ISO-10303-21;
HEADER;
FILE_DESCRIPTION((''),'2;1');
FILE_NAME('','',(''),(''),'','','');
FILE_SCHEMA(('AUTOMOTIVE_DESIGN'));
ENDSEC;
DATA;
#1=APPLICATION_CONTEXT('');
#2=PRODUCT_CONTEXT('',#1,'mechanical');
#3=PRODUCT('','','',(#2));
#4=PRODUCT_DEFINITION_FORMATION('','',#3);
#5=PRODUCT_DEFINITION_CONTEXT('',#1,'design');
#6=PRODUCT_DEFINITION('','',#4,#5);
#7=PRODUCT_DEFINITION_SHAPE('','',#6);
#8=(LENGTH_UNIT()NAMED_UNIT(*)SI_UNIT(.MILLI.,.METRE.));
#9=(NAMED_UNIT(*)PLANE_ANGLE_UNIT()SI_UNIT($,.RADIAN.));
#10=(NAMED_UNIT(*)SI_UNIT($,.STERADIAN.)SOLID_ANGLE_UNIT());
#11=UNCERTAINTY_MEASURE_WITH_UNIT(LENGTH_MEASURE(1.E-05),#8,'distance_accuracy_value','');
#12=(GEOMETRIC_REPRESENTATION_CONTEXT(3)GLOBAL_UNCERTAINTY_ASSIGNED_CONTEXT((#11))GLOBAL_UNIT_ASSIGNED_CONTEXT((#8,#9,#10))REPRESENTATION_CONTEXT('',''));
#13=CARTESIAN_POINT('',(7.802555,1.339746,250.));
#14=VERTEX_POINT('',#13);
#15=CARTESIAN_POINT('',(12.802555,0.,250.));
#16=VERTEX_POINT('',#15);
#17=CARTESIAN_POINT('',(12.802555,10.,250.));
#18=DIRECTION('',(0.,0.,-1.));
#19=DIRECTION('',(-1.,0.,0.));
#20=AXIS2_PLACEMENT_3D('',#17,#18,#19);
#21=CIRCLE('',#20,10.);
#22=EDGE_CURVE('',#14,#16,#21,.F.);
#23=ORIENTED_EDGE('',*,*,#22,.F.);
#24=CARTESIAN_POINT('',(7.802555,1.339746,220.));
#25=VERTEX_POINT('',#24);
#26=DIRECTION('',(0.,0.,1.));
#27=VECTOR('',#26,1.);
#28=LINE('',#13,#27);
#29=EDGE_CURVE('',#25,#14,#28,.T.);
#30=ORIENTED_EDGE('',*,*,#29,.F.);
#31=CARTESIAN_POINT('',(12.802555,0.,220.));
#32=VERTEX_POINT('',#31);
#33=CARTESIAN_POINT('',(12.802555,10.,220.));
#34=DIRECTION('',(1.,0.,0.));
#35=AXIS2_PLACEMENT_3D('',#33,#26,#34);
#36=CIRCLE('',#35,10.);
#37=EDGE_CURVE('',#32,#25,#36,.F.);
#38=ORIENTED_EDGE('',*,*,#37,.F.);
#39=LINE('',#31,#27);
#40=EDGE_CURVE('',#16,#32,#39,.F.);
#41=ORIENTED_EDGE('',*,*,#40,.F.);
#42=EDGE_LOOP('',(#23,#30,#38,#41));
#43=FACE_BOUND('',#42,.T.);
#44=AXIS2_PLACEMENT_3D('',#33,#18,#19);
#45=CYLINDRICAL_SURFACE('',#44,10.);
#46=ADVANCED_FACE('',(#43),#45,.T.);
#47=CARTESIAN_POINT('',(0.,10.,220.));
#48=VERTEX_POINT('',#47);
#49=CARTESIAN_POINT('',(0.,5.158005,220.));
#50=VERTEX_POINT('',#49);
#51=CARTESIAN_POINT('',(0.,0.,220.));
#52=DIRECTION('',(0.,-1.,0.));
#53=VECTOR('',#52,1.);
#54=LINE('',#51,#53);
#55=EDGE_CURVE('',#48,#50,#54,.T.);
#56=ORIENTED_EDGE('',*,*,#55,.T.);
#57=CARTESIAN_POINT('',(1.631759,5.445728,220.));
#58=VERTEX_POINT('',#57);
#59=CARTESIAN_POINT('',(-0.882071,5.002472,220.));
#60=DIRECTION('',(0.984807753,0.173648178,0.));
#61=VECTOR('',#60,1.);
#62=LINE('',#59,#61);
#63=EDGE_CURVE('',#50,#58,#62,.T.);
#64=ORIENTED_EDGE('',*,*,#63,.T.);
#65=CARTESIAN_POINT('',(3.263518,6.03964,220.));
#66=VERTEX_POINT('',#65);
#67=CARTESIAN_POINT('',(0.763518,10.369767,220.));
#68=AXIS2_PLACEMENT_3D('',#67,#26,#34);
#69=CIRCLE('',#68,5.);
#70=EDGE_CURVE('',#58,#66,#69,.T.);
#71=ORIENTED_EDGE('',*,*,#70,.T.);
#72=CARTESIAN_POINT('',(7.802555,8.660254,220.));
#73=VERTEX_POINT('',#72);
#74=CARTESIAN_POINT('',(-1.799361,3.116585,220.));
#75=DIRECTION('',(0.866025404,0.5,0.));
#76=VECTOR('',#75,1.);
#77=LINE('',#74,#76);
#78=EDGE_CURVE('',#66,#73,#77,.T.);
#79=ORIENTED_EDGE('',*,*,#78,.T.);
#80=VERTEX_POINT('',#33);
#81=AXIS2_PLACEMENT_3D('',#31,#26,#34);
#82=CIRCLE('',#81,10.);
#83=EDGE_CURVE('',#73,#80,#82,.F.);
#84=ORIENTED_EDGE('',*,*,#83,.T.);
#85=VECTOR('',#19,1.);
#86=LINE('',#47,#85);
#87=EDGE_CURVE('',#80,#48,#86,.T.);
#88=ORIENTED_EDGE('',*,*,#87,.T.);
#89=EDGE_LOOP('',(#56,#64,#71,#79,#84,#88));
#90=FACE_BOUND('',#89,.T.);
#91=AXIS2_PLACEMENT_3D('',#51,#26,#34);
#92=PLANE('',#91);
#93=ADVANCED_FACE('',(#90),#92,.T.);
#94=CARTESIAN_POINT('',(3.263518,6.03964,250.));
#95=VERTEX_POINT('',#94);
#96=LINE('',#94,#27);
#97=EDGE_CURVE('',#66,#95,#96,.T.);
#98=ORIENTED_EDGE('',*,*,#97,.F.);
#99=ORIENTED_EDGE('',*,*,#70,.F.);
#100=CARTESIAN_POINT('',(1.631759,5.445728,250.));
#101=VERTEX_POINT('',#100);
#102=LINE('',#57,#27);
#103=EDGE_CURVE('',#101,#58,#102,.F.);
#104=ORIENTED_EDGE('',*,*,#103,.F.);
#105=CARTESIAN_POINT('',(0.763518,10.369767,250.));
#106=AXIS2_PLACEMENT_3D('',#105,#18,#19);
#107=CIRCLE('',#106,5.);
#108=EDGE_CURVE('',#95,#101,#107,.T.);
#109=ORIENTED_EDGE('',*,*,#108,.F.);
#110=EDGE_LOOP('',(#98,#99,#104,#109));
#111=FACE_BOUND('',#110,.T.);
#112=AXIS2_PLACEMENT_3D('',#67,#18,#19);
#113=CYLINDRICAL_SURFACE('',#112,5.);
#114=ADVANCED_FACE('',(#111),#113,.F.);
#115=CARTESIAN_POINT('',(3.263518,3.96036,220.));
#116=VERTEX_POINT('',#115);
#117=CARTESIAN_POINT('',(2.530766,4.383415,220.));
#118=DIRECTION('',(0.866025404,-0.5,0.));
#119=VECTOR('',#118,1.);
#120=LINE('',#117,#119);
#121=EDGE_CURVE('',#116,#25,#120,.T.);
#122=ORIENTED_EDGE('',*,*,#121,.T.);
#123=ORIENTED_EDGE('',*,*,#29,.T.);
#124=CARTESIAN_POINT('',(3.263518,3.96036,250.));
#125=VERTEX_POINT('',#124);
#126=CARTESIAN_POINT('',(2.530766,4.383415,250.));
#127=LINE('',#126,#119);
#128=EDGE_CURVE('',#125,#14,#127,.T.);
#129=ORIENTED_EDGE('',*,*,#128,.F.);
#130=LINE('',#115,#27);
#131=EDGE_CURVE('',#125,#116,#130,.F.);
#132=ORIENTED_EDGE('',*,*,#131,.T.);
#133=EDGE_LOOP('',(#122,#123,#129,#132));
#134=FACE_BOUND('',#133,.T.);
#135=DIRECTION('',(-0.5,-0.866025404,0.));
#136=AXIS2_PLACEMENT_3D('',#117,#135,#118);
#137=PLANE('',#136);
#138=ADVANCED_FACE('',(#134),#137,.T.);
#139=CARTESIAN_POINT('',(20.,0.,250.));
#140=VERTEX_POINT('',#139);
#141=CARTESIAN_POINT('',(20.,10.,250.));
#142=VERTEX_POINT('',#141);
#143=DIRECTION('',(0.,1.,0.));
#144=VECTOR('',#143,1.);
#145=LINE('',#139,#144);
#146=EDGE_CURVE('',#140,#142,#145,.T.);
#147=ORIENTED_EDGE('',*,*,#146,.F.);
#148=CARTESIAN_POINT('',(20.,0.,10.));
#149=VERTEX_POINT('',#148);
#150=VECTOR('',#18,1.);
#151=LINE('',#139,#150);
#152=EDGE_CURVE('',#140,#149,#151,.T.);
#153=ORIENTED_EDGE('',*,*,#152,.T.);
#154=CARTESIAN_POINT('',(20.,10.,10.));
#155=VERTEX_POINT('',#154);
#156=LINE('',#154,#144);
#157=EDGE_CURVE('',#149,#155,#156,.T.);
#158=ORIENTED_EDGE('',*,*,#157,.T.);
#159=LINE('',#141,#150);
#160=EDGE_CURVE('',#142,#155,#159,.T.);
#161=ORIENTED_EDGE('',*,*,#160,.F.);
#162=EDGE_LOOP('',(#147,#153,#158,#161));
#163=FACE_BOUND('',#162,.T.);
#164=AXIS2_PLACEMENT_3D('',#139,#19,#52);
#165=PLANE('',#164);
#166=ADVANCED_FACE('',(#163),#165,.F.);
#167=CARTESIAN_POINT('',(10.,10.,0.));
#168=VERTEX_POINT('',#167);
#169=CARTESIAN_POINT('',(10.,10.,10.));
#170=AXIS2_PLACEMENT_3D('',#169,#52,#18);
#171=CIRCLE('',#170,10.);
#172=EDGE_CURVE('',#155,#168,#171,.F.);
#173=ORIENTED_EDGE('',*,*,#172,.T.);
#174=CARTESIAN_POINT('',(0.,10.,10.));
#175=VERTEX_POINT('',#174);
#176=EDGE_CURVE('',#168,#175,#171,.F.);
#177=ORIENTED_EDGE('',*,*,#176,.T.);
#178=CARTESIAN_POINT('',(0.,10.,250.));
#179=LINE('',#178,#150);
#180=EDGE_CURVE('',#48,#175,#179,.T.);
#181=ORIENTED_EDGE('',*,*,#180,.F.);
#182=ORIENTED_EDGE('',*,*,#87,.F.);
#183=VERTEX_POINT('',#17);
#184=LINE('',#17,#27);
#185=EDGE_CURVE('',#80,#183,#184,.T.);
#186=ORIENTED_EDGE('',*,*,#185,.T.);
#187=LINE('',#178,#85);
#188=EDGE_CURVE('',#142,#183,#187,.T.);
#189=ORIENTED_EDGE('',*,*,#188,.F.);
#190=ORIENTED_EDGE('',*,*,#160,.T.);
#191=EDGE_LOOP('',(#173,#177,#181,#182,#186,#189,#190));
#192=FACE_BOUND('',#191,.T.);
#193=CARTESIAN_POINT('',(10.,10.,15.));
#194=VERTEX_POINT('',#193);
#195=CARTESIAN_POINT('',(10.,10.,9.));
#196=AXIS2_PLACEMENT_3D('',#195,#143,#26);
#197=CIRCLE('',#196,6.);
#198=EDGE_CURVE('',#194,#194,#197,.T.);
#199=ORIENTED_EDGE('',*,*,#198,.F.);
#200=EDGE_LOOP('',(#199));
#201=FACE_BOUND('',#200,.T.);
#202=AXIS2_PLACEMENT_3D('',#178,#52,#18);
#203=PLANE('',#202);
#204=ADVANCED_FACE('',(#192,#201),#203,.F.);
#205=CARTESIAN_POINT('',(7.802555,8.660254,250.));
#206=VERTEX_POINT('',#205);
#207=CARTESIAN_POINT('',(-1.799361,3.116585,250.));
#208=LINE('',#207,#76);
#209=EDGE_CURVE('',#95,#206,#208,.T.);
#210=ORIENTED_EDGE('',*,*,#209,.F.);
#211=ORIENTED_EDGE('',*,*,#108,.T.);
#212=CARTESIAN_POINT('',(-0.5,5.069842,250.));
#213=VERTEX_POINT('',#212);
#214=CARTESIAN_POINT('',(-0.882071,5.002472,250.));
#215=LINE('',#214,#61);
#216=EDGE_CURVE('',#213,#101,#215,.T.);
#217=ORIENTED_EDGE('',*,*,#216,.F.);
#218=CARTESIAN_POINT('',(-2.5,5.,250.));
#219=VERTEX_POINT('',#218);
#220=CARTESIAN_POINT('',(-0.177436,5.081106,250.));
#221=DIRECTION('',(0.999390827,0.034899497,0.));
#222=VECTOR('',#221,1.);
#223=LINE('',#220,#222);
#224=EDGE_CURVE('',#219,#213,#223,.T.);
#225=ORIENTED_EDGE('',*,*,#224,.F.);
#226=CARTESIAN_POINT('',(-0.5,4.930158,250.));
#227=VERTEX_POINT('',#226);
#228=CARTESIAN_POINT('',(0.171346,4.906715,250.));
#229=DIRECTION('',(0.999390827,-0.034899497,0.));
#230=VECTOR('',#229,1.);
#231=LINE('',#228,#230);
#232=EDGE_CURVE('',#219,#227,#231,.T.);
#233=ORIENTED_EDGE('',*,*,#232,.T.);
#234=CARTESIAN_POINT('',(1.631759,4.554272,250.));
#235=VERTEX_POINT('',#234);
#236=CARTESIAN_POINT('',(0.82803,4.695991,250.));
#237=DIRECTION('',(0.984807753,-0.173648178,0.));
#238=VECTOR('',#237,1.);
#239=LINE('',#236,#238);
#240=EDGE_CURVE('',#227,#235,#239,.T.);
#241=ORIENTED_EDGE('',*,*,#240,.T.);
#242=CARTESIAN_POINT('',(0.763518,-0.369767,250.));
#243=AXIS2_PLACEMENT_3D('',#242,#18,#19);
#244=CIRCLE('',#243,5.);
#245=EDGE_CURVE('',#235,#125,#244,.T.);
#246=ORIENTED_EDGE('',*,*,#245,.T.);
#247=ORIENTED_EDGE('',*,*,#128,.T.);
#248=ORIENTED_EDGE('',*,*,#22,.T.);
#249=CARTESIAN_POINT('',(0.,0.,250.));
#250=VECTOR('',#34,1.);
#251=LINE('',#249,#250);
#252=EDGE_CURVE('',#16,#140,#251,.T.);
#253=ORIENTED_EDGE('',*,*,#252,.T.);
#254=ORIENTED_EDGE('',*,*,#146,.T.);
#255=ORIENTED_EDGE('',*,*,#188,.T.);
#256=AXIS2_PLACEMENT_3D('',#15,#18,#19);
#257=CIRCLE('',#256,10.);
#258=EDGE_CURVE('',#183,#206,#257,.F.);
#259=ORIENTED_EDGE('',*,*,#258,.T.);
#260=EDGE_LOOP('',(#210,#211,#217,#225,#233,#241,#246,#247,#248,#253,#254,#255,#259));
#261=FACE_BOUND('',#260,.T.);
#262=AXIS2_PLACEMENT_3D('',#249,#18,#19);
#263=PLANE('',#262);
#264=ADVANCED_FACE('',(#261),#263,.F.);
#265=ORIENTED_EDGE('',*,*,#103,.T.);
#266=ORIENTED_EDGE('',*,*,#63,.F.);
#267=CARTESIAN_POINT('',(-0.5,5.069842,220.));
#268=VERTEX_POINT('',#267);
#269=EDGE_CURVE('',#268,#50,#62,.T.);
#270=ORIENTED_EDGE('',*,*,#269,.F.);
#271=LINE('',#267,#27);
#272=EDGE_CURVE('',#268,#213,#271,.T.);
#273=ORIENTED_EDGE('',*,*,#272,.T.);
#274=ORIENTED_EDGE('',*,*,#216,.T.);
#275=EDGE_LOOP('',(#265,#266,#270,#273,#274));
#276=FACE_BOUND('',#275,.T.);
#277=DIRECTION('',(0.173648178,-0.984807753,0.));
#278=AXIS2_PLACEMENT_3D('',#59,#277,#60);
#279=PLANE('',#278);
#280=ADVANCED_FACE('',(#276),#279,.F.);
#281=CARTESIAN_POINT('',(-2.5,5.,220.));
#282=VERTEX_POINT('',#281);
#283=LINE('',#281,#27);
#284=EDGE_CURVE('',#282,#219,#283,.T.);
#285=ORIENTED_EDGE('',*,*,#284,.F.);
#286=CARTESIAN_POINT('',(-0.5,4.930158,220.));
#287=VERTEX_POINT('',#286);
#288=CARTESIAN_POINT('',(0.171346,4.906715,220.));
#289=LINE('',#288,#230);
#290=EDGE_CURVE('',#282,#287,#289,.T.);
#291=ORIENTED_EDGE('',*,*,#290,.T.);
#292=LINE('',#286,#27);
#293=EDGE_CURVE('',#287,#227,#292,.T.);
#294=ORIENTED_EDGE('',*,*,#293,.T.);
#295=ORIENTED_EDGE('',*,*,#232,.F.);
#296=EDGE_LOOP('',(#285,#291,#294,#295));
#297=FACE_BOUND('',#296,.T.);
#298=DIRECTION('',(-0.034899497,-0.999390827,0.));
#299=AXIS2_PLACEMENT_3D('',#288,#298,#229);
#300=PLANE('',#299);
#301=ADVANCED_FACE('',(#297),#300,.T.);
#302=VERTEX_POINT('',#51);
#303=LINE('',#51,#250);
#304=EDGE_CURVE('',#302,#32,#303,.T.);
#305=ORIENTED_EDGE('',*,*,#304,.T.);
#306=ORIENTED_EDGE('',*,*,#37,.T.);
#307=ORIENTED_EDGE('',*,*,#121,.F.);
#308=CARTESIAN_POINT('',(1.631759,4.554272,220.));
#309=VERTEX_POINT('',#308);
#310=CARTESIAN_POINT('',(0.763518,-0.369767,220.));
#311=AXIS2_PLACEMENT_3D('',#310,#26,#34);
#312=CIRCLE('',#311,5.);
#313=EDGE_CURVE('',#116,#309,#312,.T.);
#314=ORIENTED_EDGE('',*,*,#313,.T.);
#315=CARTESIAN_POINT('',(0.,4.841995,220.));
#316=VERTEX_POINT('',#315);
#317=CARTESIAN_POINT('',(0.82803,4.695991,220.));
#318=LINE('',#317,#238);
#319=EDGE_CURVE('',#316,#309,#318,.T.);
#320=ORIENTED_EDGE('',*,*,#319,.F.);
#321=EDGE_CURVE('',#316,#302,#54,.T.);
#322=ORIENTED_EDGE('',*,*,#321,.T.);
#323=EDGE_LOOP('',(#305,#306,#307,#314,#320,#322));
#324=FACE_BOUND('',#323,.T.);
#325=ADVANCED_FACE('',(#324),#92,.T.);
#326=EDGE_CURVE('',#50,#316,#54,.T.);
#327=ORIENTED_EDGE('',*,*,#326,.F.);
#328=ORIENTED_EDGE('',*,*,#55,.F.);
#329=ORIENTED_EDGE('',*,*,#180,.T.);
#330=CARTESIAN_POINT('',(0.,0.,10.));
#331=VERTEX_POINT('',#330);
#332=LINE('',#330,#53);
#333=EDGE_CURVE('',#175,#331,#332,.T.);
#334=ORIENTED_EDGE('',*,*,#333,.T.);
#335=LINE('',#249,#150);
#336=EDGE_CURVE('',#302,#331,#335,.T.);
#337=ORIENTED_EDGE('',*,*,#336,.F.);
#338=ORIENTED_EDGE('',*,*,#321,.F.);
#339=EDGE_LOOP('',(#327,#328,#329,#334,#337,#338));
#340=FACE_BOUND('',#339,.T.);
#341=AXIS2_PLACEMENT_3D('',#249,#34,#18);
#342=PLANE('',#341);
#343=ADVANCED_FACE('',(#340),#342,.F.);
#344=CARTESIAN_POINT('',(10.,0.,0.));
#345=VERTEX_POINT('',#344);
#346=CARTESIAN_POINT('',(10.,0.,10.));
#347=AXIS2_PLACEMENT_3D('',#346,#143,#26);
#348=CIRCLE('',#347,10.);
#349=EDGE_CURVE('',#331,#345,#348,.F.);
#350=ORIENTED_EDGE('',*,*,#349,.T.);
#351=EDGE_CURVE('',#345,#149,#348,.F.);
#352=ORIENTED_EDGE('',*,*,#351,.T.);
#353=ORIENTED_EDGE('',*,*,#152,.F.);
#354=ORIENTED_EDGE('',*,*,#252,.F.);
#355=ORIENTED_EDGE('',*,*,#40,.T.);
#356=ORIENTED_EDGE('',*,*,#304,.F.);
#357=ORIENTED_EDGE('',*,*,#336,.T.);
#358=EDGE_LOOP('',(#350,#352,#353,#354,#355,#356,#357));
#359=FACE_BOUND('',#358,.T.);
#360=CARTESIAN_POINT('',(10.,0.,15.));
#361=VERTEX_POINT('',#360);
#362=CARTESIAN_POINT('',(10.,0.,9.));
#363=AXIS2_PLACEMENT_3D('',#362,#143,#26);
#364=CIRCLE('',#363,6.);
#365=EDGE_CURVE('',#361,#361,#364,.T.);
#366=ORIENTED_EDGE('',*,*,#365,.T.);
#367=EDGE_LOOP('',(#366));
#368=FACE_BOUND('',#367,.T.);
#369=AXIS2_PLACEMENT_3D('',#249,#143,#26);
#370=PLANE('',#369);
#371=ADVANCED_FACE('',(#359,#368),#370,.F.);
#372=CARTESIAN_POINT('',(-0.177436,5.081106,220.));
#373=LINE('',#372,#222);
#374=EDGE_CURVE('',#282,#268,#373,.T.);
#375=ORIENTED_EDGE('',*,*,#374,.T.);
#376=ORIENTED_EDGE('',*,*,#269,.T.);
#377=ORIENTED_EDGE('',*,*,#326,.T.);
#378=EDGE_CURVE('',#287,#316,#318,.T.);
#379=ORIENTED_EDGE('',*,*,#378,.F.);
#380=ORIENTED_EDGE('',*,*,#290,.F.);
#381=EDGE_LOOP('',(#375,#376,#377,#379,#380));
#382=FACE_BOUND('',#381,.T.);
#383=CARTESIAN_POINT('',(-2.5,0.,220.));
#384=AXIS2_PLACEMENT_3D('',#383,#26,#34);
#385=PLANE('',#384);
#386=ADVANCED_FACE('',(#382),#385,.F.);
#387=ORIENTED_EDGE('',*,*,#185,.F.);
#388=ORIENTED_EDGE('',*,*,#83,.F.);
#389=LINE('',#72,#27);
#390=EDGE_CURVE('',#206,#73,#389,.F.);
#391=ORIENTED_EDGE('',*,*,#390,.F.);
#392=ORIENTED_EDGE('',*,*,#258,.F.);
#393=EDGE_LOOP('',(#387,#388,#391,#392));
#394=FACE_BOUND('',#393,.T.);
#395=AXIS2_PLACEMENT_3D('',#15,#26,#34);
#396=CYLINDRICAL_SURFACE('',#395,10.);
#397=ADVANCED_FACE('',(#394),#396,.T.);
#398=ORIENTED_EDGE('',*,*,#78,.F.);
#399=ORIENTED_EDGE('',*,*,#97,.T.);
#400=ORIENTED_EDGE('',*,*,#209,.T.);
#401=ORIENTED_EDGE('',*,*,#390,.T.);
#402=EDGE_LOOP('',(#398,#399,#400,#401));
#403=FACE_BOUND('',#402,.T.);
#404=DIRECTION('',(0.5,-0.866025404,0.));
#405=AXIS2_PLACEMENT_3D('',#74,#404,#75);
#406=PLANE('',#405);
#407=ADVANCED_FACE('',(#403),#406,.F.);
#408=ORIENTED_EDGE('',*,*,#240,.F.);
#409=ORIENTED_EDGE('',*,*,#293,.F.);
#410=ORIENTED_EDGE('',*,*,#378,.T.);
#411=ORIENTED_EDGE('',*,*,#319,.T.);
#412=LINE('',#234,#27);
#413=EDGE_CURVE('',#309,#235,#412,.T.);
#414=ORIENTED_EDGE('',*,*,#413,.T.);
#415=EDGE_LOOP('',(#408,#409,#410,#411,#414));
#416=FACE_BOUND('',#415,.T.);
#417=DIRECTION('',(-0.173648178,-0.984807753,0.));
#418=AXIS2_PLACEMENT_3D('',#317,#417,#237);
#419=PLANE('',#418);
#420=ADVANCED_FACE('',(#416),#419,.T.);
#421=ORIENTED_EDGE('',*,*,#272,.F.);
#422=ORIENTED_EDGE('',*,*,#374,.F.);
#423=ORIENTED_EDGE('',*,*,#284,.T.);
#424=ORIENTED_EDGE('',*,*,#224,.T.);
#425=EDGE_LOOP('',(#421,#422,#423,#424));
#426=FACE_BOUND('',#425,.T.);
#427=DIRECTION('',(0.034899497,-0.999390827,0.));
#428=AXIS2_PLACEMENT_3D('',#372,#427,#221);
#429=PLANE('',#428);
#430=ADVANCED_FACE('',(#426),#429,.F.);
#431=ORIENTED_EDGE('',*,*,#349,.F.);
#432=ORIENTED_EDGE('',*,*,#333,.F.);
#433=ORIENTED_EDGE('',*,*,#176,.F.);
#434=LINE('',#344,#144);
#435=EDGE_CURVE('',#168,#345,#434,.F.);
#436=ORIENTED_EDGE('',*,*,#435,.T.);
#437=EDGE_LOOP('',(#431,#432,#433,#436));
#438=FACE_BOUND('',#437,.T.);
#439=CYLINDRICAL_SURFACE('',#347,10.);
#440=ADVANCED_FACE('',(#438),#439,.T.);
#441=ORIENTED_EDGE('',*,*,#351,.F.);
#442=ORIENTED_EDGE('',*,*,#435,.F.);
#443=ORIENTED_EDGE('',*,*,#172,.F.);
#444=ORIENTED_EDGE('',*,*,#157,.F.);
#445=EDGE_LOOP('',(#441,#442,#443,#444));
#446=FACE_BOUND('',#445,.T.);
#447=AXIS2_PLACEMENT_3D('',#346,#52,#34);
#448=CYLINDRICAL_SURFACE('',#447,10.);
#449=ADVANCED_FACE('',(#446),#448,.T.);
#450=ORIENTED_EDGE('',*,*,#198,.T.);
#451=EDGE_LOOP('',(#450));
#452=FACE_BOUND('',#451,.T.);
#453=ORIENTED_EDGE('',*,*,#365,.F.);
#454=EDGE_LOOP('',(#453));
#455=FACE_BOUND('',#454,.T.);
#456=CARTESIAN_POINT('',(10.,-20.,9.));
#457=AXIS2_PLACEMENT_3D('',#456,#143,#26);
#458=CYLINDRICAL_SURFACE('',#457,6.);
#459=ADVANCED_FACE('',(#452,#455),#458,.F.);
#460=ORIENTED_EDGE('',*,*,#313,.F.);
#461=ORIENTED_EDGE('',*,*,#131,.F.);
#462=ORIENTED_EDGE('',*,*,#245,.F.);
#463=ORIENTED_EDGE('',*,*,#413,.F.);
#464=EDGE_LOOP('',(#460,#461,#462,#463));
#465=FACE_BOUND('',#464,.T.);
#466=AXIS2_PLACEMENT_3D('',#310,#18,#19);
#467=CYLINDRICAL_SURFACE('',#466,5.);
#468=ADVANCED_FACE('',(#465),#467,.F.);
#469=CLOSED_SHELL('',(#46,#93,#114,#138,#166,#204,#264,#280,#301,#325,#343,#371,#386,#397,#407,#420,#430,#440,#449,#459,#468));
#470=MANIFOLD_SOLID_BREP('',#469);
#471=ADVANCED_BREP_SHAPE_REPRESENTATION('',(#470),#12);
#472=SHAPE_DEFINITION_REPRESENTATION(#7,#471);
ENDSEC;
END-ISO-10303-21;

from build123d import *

# Parameters (mm, degrees)
SKETCH2_W           = 20
SKETCH2_H           = 10
BOSS_EXTRUDE1_DEPTH = 250
SKETCH3_R           = 6
CUT_EXTRUDE1_DEPTH  = 30
FILLET1_R           = 10
FILLET3_R           = 10
SKETCH4_W           = 30
SKETCH4_H           = 10
BOSS_EXTRUDE2_DEPTH = 2.5
CUT_EXTRUDE2_DEPTH  = 30
FILLET4_R           = 5
FILLET5_R           = 10


with BuildPart() as part:
    # Sketch2 → Boss-Extrude1 (new body)
    with BuildSketch(Plane.XY):
        with Locations((10, 5)):
            Rectangle(SKETCH2_W, SKETCH2_H)
    extrude(amount=BOSS_EXTRUDE1_DEPTH)

    # Sketch3 → Cut-Extrude1 (cut)
    with BuildSketch(Plane(origin=(0, 10, 0), x_dir=(1, 0, 0), z_dir=(0, 1, 0))):
        with Locations(Location((10, -9, 0), (0, 0, 270))):
            Circle(SKETCH3_R)
    extrude(amount=-CUT_EXTRUDE1_DEPTH, mode=Mode.SUBTRACT)

    # Fillet1
    fillet1_edges = [part.edges().sort_by_distance(p)[0] for p in [
        (20, 5, 0),
    ]]
    fillet(fillet1_edges, radius=FILLET1_R)

    # Fillet3
    fillet3_edges = [part.edges().sort_by_distance(p)[0] for p in [
        (0, 5, 0),
    ]]
    fillet(fillet3_edges, radius=FILLET3_R - 0.0001)  # a hair under: the kernel refuses the full size

    # Sketch4 → Boss-Extrude2 (add)
    with BuildSketch(Plane.ZY):
        with Locations((235, 5)):
            Rectangle(SKETCH4_W, SKETCH4_H)
    extrude(amount=BOSS_EXTRUDE2_DEPTH)

    # Sketch5 → Cut-Extrude2 (cut)
    with BuildSketch(Plane.XY.offset(250)):
        Polygon((-2.5, 10), (-2.5, 5), (-0.5, 5.069841539), (2.5, 5.598822481), (10.123063076, 10), align=None)
        Polygon((-0.5, 4.930158461), (-2.5, 5), (-2.5, 0), (10.123063076, 0), (2.5, 4.401177519), align=None)
    extrude(amount=-CUT_EXTRUDE2_DEPTH, mode=Mode.SUBTRACT)

    # Fillet4
    fillet4_edges = [part.edges().sort_by_distance(p)[0] for p in [
        (2.5, 5.598822481, 235),
        (2.5, 4.401177519, 235),
    ]]
    fillet(fillet4_edges, radius=FILLET4_R)

    # Fillet5
    fillet5_edges = [part.edges().sort_by_distance(p)[0] for p in [
        (10.123063076, 10, 235),
        (10.123063076, 0, 235),
    ]]
    fillet(fillet5_edges, radius=FILLET5_R)


solid = part.part
